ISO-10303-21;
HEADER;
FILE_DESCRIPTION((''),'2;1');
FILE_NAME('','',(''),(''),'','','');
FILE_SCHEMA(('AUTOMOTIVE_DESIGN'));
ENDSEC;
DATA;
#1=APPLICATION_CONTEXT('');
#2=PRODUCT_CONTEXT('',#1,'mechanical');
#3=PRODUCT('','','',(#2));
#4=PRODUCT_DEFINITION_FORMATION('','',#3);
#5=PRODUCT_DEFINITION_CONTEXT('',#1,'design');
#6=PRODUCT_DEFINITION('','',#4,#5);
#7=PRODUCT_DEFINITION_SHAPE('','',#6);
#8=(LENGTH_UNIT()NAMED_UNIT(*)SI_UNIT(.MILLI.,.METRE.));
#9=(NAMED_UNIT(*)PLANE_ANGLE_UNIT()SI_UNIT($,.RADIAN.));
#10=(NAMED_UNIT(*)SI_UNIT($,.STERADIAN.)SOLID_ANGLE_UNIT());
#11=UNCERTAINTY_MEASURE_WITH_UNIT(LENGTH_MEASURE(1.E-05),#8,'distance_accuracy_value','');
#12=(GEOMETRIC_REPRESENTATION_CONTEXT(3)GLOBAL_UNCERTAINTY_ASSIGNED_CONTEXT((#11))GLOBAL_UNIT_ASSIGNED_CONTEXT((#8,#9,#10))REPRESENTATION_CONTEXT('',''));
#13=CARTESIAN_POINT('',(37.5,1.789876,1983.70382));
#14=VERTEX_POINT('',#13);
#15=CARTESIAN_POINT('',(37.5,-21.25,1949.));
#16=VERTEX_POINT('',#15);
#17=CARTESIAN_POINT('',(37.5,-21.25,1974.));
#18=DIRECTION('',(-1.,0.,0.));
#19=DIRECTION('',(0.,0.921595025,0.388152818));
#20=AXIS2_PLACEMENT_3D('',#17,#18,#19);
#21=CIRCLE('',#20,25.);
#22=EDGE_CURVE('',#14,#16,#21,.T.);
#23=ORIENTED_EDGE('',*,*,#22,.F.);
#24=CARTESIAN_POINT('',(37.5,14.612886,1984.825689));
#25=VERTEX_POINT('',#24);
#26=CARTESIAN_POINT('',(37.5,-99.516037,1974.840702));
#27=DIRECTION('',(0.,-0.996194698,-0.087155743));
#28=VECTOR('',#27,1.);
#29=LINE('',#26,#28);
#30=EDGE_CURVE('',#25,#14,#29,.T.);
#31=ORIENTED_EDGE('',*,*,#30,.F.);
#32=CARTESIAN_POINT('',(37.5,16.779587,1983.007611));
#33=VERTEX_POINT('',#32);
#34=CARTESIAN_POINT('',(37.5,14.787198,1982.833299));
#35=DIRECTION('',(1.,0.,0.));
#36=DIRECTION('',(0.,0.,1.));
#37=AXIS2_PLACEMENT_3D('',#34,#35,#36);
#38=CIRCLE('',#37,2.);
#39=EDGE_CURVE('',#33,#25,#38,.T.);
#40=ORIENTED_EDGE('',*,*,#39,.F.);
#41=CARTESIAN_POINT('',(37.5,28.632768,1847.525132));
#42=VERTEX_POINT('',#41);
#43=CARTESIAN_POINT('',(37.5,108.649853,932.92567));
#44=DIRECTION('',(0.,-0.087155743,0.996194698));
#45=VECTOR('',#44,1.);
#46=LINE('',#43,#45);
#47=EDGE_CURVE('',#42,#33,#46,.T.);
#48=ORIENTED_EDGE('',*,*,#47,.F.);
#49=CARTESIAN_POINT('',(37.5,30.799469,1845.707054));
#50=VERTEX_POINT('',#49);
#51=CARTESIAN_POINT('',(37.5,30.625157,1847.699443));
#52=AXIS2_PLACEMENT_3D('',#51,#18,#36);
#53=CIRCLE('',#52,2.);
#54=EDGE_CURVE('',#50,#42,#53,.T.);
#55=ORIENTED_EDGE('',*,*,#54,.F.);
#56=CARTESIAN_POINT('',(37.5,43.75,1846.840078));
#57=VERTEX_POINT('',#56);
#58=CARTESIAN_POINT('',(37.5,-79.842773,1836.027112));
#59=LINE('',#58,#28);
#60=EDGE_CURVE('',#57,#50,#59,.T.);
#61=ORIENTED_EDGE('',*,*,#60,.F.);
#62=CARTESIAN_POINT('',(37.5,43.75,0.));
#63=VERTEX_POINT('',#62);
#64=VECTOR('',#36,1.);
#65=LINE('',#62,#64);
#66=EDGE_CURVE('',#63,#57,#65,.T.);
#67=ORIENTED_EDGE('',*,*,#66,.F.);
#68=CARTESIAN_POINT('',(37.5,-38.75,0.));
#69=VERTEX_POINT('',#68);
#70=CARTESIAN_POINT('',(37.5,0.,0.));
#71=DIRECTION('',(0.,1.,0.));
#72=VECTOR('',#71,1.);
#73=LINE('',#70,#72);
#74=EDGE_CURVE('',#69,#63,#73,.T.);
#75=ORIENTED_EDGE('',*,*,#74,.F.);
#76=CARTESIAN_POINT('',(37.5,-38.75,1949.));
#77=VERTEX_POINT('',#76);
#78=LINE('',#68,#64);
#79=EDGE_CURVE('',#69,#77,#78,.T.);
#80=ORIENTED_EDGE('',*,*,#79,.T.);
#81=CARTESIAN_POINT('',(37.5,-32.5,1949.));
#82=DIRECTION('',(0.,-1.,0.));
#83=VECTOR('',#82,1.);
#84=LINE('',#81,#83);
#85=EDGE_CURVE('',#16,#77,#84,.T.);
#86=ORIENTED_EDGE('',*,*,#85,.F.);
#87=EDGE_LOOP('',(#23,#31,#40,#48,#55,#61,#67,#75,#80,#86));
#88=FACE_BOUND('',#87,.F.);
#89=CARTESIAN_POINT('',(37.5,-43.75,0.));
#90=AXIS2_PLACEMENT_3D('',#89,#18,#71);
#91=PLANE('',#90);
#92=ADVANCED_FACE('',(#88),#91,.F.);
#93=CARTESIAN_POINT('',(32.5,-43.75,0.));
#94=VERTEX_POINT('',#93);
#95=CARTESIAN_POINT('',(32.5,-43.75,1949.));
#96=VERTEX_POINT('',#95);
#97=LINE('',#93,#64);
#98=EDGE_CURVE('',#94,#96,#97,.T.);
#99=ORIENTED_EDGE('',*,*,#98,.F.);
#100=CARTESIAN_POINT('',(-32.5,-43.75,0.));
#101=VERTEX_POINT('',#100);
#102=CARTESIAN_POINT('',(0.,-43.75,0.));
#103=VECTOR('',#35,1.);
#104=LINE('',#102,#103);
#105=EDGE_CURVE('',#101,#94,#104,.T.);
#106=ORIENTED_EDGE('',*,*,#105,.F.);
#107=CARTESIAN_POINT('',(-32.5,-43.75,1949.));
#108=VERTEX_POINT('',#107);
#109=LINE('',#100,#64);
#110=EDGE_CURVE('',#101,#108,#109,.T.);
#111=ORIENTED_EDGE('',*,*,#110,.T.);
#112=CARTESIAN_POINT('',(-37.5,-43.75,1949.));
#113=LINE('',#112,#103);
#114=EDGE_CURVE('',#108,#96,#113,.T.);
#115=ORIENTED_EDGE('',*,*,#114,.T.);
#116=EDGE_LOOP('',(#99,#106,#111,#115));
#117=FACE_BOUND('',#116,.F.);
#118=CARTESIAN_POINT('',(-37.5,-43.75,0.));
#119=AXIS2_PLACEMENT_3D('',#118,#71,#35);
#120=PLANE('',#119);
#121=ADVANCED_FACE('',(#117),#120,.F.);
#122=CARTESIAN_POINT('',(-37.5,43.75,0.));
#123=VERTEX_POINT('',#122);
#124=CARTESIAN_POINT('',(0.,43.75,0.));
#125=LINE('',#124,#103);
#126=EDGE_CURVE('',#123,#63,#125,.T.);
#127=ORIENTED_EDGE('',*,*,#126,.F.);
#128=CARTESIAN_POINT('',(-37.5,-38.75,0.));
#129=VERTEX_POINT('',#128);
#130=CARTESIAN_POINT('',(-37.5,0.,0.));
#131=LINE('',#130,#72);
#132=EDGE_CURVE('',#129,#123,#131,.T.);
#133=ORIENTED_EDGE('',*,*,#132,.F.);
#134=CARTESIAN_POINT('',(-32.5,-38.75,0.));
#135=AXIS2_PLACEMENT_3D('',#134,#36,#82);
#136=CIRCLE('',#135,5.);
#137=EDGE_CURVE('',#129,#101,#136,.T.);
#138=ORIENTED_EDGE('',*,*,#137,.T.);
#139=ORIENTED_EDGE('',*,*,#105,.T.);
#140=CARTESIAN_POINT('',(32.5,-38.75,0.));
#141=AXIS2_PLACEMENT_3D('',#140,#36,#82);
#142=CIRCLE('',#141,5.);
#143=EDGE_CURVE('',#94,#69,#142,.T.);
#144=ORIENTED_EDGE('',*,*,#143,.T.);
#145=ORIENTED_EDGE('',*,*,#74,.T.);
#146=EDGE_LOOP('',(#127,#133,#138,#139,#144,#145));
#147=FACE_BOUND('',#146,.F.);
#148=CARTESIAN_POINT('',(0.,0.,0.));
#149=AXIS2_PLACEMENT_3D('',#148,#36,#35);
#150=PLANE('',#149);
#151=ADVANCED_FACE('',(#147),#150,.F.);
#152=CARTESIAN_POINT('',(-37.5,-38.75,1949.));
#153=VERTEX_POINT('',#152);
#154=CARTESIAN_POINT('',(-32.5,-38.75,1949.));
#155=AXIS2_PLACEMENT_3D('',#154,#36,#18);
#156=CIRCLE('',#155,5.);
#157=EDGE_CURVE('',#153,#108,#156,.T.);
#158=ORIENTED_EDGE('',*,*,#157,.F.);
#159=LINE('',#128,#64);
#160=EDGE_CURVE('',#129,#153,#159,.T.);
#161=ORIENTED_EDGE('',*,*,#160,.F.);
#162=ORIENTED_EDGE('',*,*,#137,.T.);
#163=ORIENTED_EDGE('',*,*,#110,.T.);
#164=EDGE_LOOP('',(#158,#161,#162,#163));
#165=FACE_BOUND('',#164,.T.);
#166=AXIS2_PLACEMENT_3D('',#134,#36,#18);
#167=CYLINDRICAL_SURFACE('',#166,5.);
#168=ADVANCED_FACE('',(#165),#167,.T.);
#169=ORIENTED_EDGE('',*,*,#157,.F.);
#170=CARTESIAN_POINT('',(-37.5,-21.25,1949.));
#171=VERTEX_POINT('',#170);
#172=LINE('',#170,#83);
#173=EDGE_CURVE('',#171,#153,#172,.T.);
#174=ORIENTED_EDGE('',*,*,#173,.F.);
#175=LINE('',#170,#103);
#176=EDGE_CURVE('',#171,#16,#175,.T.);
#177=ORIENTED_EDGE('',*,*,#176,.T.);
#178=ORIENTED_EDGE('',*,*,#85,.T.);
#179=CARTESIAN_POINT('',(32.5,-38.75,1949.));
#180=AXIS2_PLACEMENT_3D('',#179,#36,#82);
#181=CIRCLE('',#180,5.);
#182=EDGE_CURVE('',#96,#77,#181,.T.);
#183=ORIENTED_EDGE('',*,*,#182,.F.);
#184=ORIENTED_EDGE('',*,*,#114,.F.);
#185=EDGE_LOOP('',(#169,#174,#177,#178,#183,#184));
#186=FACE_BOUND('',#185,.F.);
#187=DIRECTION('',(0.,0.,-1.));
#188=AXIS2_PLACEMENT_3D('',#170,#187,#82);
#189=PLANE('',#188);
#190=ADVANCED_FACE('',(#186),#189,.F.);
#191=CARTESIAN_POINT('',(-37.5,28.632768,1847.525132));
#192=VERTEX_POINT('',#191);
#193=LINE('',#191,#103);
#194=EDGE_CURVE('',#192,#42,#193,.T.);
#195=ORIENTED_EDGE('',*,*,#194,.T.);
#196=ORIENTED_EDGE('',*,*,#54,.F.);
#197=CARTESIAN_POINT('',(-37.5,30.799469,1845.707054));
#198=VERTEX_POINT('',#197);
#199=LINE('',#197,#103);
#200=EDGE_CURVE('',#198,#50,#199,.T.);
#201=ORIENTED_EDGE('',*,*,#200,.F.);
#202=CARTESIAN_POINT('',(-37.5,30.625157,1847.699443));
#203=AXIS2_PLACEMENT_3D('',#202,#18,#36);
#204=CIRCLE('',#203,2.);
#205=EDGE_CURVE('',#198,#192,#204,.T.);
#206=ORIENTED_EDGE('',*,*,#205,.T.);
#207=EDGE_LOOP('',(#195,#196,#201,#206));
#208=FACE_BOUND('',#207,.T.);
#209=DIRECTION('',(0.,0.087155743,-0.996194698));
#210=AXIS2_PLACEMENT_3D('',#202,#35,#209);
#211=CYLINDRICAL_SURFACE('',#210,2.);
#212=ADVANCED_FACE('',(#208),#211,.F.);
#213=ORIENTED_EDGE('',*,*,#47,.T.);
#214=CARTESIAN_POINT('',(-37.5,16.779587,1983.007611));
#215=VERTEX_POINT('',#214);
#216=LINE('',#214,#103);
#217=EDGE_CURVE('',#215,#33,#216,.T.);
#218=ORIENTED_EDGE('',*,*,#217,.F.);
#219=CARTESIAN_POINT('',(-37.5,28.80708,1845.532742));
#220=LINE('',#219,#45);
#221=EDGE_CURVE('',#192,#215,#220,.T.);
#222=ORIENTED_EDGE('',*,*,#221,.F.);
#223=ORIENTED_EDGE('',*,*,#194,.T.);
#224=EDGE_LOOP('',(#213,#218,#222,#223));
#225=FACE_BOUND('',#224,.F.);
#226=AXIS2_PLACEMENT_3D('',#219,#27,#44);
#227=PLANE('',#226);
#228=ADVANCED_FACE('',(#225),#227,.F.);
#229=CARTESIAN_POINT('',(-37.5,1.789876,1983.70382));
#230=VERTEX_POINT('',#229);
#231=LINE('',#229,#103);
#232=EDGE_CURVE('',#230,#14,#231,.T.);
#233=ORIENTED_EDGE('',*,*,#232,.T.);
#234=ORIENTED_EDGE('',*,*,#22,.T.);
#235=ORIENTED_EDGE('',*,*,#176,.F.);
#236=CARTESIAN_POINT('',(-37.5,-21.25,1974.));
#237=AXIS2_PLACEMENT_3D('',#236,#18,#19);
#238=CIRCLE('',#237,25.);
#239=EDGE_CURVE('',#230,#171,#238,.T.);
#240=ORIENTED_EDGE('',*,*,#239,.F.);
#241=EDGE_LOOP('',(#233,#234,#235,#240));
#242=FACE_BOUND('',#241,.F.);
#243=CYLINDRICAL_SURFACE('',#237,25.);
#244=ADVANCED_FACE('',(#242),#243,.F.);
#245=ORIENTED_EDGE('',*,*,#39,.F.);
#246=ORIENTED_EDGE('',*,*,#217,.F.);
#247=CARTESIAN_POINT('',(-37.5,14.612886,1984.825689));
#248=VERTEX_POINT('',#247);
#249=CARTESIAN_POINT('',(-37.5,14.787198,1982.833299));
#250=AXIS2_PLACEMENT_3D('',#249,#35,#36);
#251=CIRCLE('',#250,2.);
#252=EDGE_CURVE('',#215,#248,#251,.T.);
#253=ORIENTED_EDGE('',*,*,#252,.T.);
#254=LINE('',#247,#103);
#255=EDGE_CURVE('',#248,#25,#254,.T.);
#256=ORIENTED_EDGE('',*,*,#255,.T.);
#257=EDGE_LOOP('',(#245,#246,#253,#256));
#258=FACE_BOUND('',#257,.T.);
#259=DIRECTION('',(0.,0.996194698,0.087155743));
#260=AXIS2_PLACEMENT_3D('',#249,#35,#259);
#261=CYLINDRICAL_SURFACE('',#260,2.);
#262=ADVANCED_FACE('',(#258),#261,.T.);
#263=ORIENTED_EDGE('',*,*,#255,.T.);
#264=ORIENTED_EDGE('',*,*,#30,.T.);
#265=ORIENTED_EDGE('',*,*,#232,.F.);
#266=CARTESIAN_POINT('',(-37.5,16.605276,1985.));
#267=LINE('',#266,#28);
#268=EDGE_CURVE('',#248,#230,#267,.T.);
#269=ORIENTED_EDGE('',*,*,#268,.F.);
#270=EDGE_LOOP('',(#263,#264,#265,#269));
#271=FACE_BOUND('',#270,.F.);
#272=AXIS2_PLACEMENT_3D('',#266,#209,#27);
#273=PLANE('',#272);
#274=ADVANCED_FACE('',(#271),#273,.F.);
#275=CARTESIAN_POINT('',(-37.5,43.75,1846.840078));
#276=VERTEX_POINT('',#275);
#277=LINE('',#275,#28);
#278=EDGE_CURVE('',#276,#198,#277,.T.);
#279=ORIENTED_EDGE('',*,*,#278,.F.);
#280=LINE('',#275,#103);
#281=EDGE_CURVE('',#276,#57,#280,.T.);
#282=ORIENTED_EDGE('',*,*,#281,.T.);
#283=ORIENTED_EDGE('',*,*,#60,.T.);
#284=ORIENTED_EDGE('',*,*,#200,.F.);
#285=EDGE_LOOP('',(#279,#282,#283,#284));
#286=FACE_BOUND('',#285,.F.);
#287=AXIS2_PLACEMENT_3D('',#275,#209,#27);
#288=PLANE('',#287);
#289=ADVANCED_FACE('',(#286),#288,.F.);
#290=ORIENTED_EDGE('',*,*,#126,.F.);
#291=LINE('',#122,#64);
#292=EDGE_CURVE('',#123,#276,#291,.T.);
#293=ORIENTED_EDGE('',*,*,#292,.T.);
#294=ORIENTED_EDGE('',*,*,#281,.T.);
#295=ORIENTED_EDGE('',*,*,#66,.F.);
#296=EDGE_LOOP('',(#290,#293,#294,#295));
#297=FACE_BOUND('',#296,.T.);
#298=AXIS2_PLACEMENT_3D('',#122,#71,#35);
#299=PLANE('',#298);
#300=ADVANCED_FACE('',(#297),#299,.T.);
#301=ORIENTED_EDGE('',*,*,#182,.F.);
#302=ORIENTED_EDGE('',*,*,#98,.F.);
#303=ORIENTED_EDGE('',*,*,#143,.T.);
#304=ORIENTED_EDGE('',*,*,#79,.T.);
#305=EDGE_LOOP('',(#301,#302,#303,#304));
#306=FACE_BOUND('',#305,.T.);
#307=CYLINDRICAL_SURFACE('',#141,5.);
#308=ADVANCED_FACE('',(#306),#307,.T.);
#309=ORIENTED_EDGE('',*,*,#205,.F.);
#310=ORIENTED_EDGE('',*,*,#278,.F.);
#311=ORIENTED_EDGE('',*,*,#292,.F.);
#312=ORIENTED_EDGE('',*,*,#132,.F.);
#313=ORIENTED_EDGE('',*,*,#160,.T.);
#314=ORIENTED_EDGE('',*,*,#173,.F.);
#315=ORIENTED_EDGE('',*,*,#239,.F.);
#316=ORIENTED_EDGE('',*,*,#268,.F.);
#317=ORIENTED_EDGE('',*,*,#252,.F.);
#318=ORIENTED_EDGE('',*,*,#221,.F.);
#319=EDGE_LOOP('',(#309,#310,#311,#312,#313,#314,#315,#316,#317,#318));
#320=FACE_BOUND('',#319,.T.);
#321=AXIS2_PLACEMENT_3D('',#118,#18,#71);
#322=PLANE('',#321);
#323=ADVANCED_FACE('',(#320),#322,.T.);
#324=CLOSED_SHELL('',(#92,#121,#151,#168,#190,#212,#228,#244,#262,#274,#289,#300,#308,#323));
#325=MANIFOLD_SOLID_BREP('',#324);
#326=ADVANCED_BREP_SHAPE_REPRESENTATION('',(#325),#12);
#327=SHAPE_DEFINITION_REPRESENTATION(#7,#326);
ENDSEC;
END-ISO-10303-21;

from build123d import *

# Parameters (mm, degrees)
F0_W     = 75
F0_H     = 87.5
F1_DEPTH = 2000
F2_R     = 5
F3_W     = 5
F3_H     = 51
F4_DEPTH = 75.001
F5_R     = 2


# Not quite as in the source:
# - a feature names something its author has since deleted; it is built from what else it names


with BuildPart() as f1:
    # F0 (on Top) → F1 (new body)
    with BuildSketch(Plane.XY):
        Rectangle(F0_W, F0_H)
    extrude(amount=F1_DEPTH)

    # F2
    f2_edges = [f1.edges().sort_by_distance(p)[0] for p in [
        (-37.5, -43.75, 1000),
        (37.5, -43.75, 1000),
    ]]
    fillet(f2_edges, radius=F2_R)

    # F3 (on face) → F4 (cut, through all)
    with BuildSketch(Plane(origin=(-37.5, 0, 0), x_dir=(0, -1, 0), z_dir=(-1, 0, 0))):
        with BuildLine():
            Line((-28.8070795286, 1845.5327422672), (-16.605275544, 1985))
            Line((-16.605275544, 1985), (-1.7898756174, 1983.7038204608))
            ThreePointArc((-1.7898756174, 1983.7038204608), (0.4221879267, 1960.172410035), (21.25, 1949))
            Line((21.25, 1949), (38.75, 1949))
            Line((38.75, 1949), (38.75, 2000))
            Line((38.75, 2000), (-43.75, 2000))
            Line((-43.75, 2000), (-43.75, 1846.8400784084))
            Line((-43.75, 1846.8400784084), (-28.8070795286, 1845.5327422672))
        make_face()
        with Locations((41.25, 1974.5)):
            Rectangle(F3_W, F3_H)
    extrude(amount=-F4_DEPTH, mode=Mode.SUBTRACT)

    # F5
    f5_edges = [f1.edges().sort_by_distance(p)[0] for p in [
        (0, 16.605276, 1985),
        (0, 28.80708, 1845.532742),
    ]]
    fillet(f5_edges, radius=F5_R)


solid = f1.part
